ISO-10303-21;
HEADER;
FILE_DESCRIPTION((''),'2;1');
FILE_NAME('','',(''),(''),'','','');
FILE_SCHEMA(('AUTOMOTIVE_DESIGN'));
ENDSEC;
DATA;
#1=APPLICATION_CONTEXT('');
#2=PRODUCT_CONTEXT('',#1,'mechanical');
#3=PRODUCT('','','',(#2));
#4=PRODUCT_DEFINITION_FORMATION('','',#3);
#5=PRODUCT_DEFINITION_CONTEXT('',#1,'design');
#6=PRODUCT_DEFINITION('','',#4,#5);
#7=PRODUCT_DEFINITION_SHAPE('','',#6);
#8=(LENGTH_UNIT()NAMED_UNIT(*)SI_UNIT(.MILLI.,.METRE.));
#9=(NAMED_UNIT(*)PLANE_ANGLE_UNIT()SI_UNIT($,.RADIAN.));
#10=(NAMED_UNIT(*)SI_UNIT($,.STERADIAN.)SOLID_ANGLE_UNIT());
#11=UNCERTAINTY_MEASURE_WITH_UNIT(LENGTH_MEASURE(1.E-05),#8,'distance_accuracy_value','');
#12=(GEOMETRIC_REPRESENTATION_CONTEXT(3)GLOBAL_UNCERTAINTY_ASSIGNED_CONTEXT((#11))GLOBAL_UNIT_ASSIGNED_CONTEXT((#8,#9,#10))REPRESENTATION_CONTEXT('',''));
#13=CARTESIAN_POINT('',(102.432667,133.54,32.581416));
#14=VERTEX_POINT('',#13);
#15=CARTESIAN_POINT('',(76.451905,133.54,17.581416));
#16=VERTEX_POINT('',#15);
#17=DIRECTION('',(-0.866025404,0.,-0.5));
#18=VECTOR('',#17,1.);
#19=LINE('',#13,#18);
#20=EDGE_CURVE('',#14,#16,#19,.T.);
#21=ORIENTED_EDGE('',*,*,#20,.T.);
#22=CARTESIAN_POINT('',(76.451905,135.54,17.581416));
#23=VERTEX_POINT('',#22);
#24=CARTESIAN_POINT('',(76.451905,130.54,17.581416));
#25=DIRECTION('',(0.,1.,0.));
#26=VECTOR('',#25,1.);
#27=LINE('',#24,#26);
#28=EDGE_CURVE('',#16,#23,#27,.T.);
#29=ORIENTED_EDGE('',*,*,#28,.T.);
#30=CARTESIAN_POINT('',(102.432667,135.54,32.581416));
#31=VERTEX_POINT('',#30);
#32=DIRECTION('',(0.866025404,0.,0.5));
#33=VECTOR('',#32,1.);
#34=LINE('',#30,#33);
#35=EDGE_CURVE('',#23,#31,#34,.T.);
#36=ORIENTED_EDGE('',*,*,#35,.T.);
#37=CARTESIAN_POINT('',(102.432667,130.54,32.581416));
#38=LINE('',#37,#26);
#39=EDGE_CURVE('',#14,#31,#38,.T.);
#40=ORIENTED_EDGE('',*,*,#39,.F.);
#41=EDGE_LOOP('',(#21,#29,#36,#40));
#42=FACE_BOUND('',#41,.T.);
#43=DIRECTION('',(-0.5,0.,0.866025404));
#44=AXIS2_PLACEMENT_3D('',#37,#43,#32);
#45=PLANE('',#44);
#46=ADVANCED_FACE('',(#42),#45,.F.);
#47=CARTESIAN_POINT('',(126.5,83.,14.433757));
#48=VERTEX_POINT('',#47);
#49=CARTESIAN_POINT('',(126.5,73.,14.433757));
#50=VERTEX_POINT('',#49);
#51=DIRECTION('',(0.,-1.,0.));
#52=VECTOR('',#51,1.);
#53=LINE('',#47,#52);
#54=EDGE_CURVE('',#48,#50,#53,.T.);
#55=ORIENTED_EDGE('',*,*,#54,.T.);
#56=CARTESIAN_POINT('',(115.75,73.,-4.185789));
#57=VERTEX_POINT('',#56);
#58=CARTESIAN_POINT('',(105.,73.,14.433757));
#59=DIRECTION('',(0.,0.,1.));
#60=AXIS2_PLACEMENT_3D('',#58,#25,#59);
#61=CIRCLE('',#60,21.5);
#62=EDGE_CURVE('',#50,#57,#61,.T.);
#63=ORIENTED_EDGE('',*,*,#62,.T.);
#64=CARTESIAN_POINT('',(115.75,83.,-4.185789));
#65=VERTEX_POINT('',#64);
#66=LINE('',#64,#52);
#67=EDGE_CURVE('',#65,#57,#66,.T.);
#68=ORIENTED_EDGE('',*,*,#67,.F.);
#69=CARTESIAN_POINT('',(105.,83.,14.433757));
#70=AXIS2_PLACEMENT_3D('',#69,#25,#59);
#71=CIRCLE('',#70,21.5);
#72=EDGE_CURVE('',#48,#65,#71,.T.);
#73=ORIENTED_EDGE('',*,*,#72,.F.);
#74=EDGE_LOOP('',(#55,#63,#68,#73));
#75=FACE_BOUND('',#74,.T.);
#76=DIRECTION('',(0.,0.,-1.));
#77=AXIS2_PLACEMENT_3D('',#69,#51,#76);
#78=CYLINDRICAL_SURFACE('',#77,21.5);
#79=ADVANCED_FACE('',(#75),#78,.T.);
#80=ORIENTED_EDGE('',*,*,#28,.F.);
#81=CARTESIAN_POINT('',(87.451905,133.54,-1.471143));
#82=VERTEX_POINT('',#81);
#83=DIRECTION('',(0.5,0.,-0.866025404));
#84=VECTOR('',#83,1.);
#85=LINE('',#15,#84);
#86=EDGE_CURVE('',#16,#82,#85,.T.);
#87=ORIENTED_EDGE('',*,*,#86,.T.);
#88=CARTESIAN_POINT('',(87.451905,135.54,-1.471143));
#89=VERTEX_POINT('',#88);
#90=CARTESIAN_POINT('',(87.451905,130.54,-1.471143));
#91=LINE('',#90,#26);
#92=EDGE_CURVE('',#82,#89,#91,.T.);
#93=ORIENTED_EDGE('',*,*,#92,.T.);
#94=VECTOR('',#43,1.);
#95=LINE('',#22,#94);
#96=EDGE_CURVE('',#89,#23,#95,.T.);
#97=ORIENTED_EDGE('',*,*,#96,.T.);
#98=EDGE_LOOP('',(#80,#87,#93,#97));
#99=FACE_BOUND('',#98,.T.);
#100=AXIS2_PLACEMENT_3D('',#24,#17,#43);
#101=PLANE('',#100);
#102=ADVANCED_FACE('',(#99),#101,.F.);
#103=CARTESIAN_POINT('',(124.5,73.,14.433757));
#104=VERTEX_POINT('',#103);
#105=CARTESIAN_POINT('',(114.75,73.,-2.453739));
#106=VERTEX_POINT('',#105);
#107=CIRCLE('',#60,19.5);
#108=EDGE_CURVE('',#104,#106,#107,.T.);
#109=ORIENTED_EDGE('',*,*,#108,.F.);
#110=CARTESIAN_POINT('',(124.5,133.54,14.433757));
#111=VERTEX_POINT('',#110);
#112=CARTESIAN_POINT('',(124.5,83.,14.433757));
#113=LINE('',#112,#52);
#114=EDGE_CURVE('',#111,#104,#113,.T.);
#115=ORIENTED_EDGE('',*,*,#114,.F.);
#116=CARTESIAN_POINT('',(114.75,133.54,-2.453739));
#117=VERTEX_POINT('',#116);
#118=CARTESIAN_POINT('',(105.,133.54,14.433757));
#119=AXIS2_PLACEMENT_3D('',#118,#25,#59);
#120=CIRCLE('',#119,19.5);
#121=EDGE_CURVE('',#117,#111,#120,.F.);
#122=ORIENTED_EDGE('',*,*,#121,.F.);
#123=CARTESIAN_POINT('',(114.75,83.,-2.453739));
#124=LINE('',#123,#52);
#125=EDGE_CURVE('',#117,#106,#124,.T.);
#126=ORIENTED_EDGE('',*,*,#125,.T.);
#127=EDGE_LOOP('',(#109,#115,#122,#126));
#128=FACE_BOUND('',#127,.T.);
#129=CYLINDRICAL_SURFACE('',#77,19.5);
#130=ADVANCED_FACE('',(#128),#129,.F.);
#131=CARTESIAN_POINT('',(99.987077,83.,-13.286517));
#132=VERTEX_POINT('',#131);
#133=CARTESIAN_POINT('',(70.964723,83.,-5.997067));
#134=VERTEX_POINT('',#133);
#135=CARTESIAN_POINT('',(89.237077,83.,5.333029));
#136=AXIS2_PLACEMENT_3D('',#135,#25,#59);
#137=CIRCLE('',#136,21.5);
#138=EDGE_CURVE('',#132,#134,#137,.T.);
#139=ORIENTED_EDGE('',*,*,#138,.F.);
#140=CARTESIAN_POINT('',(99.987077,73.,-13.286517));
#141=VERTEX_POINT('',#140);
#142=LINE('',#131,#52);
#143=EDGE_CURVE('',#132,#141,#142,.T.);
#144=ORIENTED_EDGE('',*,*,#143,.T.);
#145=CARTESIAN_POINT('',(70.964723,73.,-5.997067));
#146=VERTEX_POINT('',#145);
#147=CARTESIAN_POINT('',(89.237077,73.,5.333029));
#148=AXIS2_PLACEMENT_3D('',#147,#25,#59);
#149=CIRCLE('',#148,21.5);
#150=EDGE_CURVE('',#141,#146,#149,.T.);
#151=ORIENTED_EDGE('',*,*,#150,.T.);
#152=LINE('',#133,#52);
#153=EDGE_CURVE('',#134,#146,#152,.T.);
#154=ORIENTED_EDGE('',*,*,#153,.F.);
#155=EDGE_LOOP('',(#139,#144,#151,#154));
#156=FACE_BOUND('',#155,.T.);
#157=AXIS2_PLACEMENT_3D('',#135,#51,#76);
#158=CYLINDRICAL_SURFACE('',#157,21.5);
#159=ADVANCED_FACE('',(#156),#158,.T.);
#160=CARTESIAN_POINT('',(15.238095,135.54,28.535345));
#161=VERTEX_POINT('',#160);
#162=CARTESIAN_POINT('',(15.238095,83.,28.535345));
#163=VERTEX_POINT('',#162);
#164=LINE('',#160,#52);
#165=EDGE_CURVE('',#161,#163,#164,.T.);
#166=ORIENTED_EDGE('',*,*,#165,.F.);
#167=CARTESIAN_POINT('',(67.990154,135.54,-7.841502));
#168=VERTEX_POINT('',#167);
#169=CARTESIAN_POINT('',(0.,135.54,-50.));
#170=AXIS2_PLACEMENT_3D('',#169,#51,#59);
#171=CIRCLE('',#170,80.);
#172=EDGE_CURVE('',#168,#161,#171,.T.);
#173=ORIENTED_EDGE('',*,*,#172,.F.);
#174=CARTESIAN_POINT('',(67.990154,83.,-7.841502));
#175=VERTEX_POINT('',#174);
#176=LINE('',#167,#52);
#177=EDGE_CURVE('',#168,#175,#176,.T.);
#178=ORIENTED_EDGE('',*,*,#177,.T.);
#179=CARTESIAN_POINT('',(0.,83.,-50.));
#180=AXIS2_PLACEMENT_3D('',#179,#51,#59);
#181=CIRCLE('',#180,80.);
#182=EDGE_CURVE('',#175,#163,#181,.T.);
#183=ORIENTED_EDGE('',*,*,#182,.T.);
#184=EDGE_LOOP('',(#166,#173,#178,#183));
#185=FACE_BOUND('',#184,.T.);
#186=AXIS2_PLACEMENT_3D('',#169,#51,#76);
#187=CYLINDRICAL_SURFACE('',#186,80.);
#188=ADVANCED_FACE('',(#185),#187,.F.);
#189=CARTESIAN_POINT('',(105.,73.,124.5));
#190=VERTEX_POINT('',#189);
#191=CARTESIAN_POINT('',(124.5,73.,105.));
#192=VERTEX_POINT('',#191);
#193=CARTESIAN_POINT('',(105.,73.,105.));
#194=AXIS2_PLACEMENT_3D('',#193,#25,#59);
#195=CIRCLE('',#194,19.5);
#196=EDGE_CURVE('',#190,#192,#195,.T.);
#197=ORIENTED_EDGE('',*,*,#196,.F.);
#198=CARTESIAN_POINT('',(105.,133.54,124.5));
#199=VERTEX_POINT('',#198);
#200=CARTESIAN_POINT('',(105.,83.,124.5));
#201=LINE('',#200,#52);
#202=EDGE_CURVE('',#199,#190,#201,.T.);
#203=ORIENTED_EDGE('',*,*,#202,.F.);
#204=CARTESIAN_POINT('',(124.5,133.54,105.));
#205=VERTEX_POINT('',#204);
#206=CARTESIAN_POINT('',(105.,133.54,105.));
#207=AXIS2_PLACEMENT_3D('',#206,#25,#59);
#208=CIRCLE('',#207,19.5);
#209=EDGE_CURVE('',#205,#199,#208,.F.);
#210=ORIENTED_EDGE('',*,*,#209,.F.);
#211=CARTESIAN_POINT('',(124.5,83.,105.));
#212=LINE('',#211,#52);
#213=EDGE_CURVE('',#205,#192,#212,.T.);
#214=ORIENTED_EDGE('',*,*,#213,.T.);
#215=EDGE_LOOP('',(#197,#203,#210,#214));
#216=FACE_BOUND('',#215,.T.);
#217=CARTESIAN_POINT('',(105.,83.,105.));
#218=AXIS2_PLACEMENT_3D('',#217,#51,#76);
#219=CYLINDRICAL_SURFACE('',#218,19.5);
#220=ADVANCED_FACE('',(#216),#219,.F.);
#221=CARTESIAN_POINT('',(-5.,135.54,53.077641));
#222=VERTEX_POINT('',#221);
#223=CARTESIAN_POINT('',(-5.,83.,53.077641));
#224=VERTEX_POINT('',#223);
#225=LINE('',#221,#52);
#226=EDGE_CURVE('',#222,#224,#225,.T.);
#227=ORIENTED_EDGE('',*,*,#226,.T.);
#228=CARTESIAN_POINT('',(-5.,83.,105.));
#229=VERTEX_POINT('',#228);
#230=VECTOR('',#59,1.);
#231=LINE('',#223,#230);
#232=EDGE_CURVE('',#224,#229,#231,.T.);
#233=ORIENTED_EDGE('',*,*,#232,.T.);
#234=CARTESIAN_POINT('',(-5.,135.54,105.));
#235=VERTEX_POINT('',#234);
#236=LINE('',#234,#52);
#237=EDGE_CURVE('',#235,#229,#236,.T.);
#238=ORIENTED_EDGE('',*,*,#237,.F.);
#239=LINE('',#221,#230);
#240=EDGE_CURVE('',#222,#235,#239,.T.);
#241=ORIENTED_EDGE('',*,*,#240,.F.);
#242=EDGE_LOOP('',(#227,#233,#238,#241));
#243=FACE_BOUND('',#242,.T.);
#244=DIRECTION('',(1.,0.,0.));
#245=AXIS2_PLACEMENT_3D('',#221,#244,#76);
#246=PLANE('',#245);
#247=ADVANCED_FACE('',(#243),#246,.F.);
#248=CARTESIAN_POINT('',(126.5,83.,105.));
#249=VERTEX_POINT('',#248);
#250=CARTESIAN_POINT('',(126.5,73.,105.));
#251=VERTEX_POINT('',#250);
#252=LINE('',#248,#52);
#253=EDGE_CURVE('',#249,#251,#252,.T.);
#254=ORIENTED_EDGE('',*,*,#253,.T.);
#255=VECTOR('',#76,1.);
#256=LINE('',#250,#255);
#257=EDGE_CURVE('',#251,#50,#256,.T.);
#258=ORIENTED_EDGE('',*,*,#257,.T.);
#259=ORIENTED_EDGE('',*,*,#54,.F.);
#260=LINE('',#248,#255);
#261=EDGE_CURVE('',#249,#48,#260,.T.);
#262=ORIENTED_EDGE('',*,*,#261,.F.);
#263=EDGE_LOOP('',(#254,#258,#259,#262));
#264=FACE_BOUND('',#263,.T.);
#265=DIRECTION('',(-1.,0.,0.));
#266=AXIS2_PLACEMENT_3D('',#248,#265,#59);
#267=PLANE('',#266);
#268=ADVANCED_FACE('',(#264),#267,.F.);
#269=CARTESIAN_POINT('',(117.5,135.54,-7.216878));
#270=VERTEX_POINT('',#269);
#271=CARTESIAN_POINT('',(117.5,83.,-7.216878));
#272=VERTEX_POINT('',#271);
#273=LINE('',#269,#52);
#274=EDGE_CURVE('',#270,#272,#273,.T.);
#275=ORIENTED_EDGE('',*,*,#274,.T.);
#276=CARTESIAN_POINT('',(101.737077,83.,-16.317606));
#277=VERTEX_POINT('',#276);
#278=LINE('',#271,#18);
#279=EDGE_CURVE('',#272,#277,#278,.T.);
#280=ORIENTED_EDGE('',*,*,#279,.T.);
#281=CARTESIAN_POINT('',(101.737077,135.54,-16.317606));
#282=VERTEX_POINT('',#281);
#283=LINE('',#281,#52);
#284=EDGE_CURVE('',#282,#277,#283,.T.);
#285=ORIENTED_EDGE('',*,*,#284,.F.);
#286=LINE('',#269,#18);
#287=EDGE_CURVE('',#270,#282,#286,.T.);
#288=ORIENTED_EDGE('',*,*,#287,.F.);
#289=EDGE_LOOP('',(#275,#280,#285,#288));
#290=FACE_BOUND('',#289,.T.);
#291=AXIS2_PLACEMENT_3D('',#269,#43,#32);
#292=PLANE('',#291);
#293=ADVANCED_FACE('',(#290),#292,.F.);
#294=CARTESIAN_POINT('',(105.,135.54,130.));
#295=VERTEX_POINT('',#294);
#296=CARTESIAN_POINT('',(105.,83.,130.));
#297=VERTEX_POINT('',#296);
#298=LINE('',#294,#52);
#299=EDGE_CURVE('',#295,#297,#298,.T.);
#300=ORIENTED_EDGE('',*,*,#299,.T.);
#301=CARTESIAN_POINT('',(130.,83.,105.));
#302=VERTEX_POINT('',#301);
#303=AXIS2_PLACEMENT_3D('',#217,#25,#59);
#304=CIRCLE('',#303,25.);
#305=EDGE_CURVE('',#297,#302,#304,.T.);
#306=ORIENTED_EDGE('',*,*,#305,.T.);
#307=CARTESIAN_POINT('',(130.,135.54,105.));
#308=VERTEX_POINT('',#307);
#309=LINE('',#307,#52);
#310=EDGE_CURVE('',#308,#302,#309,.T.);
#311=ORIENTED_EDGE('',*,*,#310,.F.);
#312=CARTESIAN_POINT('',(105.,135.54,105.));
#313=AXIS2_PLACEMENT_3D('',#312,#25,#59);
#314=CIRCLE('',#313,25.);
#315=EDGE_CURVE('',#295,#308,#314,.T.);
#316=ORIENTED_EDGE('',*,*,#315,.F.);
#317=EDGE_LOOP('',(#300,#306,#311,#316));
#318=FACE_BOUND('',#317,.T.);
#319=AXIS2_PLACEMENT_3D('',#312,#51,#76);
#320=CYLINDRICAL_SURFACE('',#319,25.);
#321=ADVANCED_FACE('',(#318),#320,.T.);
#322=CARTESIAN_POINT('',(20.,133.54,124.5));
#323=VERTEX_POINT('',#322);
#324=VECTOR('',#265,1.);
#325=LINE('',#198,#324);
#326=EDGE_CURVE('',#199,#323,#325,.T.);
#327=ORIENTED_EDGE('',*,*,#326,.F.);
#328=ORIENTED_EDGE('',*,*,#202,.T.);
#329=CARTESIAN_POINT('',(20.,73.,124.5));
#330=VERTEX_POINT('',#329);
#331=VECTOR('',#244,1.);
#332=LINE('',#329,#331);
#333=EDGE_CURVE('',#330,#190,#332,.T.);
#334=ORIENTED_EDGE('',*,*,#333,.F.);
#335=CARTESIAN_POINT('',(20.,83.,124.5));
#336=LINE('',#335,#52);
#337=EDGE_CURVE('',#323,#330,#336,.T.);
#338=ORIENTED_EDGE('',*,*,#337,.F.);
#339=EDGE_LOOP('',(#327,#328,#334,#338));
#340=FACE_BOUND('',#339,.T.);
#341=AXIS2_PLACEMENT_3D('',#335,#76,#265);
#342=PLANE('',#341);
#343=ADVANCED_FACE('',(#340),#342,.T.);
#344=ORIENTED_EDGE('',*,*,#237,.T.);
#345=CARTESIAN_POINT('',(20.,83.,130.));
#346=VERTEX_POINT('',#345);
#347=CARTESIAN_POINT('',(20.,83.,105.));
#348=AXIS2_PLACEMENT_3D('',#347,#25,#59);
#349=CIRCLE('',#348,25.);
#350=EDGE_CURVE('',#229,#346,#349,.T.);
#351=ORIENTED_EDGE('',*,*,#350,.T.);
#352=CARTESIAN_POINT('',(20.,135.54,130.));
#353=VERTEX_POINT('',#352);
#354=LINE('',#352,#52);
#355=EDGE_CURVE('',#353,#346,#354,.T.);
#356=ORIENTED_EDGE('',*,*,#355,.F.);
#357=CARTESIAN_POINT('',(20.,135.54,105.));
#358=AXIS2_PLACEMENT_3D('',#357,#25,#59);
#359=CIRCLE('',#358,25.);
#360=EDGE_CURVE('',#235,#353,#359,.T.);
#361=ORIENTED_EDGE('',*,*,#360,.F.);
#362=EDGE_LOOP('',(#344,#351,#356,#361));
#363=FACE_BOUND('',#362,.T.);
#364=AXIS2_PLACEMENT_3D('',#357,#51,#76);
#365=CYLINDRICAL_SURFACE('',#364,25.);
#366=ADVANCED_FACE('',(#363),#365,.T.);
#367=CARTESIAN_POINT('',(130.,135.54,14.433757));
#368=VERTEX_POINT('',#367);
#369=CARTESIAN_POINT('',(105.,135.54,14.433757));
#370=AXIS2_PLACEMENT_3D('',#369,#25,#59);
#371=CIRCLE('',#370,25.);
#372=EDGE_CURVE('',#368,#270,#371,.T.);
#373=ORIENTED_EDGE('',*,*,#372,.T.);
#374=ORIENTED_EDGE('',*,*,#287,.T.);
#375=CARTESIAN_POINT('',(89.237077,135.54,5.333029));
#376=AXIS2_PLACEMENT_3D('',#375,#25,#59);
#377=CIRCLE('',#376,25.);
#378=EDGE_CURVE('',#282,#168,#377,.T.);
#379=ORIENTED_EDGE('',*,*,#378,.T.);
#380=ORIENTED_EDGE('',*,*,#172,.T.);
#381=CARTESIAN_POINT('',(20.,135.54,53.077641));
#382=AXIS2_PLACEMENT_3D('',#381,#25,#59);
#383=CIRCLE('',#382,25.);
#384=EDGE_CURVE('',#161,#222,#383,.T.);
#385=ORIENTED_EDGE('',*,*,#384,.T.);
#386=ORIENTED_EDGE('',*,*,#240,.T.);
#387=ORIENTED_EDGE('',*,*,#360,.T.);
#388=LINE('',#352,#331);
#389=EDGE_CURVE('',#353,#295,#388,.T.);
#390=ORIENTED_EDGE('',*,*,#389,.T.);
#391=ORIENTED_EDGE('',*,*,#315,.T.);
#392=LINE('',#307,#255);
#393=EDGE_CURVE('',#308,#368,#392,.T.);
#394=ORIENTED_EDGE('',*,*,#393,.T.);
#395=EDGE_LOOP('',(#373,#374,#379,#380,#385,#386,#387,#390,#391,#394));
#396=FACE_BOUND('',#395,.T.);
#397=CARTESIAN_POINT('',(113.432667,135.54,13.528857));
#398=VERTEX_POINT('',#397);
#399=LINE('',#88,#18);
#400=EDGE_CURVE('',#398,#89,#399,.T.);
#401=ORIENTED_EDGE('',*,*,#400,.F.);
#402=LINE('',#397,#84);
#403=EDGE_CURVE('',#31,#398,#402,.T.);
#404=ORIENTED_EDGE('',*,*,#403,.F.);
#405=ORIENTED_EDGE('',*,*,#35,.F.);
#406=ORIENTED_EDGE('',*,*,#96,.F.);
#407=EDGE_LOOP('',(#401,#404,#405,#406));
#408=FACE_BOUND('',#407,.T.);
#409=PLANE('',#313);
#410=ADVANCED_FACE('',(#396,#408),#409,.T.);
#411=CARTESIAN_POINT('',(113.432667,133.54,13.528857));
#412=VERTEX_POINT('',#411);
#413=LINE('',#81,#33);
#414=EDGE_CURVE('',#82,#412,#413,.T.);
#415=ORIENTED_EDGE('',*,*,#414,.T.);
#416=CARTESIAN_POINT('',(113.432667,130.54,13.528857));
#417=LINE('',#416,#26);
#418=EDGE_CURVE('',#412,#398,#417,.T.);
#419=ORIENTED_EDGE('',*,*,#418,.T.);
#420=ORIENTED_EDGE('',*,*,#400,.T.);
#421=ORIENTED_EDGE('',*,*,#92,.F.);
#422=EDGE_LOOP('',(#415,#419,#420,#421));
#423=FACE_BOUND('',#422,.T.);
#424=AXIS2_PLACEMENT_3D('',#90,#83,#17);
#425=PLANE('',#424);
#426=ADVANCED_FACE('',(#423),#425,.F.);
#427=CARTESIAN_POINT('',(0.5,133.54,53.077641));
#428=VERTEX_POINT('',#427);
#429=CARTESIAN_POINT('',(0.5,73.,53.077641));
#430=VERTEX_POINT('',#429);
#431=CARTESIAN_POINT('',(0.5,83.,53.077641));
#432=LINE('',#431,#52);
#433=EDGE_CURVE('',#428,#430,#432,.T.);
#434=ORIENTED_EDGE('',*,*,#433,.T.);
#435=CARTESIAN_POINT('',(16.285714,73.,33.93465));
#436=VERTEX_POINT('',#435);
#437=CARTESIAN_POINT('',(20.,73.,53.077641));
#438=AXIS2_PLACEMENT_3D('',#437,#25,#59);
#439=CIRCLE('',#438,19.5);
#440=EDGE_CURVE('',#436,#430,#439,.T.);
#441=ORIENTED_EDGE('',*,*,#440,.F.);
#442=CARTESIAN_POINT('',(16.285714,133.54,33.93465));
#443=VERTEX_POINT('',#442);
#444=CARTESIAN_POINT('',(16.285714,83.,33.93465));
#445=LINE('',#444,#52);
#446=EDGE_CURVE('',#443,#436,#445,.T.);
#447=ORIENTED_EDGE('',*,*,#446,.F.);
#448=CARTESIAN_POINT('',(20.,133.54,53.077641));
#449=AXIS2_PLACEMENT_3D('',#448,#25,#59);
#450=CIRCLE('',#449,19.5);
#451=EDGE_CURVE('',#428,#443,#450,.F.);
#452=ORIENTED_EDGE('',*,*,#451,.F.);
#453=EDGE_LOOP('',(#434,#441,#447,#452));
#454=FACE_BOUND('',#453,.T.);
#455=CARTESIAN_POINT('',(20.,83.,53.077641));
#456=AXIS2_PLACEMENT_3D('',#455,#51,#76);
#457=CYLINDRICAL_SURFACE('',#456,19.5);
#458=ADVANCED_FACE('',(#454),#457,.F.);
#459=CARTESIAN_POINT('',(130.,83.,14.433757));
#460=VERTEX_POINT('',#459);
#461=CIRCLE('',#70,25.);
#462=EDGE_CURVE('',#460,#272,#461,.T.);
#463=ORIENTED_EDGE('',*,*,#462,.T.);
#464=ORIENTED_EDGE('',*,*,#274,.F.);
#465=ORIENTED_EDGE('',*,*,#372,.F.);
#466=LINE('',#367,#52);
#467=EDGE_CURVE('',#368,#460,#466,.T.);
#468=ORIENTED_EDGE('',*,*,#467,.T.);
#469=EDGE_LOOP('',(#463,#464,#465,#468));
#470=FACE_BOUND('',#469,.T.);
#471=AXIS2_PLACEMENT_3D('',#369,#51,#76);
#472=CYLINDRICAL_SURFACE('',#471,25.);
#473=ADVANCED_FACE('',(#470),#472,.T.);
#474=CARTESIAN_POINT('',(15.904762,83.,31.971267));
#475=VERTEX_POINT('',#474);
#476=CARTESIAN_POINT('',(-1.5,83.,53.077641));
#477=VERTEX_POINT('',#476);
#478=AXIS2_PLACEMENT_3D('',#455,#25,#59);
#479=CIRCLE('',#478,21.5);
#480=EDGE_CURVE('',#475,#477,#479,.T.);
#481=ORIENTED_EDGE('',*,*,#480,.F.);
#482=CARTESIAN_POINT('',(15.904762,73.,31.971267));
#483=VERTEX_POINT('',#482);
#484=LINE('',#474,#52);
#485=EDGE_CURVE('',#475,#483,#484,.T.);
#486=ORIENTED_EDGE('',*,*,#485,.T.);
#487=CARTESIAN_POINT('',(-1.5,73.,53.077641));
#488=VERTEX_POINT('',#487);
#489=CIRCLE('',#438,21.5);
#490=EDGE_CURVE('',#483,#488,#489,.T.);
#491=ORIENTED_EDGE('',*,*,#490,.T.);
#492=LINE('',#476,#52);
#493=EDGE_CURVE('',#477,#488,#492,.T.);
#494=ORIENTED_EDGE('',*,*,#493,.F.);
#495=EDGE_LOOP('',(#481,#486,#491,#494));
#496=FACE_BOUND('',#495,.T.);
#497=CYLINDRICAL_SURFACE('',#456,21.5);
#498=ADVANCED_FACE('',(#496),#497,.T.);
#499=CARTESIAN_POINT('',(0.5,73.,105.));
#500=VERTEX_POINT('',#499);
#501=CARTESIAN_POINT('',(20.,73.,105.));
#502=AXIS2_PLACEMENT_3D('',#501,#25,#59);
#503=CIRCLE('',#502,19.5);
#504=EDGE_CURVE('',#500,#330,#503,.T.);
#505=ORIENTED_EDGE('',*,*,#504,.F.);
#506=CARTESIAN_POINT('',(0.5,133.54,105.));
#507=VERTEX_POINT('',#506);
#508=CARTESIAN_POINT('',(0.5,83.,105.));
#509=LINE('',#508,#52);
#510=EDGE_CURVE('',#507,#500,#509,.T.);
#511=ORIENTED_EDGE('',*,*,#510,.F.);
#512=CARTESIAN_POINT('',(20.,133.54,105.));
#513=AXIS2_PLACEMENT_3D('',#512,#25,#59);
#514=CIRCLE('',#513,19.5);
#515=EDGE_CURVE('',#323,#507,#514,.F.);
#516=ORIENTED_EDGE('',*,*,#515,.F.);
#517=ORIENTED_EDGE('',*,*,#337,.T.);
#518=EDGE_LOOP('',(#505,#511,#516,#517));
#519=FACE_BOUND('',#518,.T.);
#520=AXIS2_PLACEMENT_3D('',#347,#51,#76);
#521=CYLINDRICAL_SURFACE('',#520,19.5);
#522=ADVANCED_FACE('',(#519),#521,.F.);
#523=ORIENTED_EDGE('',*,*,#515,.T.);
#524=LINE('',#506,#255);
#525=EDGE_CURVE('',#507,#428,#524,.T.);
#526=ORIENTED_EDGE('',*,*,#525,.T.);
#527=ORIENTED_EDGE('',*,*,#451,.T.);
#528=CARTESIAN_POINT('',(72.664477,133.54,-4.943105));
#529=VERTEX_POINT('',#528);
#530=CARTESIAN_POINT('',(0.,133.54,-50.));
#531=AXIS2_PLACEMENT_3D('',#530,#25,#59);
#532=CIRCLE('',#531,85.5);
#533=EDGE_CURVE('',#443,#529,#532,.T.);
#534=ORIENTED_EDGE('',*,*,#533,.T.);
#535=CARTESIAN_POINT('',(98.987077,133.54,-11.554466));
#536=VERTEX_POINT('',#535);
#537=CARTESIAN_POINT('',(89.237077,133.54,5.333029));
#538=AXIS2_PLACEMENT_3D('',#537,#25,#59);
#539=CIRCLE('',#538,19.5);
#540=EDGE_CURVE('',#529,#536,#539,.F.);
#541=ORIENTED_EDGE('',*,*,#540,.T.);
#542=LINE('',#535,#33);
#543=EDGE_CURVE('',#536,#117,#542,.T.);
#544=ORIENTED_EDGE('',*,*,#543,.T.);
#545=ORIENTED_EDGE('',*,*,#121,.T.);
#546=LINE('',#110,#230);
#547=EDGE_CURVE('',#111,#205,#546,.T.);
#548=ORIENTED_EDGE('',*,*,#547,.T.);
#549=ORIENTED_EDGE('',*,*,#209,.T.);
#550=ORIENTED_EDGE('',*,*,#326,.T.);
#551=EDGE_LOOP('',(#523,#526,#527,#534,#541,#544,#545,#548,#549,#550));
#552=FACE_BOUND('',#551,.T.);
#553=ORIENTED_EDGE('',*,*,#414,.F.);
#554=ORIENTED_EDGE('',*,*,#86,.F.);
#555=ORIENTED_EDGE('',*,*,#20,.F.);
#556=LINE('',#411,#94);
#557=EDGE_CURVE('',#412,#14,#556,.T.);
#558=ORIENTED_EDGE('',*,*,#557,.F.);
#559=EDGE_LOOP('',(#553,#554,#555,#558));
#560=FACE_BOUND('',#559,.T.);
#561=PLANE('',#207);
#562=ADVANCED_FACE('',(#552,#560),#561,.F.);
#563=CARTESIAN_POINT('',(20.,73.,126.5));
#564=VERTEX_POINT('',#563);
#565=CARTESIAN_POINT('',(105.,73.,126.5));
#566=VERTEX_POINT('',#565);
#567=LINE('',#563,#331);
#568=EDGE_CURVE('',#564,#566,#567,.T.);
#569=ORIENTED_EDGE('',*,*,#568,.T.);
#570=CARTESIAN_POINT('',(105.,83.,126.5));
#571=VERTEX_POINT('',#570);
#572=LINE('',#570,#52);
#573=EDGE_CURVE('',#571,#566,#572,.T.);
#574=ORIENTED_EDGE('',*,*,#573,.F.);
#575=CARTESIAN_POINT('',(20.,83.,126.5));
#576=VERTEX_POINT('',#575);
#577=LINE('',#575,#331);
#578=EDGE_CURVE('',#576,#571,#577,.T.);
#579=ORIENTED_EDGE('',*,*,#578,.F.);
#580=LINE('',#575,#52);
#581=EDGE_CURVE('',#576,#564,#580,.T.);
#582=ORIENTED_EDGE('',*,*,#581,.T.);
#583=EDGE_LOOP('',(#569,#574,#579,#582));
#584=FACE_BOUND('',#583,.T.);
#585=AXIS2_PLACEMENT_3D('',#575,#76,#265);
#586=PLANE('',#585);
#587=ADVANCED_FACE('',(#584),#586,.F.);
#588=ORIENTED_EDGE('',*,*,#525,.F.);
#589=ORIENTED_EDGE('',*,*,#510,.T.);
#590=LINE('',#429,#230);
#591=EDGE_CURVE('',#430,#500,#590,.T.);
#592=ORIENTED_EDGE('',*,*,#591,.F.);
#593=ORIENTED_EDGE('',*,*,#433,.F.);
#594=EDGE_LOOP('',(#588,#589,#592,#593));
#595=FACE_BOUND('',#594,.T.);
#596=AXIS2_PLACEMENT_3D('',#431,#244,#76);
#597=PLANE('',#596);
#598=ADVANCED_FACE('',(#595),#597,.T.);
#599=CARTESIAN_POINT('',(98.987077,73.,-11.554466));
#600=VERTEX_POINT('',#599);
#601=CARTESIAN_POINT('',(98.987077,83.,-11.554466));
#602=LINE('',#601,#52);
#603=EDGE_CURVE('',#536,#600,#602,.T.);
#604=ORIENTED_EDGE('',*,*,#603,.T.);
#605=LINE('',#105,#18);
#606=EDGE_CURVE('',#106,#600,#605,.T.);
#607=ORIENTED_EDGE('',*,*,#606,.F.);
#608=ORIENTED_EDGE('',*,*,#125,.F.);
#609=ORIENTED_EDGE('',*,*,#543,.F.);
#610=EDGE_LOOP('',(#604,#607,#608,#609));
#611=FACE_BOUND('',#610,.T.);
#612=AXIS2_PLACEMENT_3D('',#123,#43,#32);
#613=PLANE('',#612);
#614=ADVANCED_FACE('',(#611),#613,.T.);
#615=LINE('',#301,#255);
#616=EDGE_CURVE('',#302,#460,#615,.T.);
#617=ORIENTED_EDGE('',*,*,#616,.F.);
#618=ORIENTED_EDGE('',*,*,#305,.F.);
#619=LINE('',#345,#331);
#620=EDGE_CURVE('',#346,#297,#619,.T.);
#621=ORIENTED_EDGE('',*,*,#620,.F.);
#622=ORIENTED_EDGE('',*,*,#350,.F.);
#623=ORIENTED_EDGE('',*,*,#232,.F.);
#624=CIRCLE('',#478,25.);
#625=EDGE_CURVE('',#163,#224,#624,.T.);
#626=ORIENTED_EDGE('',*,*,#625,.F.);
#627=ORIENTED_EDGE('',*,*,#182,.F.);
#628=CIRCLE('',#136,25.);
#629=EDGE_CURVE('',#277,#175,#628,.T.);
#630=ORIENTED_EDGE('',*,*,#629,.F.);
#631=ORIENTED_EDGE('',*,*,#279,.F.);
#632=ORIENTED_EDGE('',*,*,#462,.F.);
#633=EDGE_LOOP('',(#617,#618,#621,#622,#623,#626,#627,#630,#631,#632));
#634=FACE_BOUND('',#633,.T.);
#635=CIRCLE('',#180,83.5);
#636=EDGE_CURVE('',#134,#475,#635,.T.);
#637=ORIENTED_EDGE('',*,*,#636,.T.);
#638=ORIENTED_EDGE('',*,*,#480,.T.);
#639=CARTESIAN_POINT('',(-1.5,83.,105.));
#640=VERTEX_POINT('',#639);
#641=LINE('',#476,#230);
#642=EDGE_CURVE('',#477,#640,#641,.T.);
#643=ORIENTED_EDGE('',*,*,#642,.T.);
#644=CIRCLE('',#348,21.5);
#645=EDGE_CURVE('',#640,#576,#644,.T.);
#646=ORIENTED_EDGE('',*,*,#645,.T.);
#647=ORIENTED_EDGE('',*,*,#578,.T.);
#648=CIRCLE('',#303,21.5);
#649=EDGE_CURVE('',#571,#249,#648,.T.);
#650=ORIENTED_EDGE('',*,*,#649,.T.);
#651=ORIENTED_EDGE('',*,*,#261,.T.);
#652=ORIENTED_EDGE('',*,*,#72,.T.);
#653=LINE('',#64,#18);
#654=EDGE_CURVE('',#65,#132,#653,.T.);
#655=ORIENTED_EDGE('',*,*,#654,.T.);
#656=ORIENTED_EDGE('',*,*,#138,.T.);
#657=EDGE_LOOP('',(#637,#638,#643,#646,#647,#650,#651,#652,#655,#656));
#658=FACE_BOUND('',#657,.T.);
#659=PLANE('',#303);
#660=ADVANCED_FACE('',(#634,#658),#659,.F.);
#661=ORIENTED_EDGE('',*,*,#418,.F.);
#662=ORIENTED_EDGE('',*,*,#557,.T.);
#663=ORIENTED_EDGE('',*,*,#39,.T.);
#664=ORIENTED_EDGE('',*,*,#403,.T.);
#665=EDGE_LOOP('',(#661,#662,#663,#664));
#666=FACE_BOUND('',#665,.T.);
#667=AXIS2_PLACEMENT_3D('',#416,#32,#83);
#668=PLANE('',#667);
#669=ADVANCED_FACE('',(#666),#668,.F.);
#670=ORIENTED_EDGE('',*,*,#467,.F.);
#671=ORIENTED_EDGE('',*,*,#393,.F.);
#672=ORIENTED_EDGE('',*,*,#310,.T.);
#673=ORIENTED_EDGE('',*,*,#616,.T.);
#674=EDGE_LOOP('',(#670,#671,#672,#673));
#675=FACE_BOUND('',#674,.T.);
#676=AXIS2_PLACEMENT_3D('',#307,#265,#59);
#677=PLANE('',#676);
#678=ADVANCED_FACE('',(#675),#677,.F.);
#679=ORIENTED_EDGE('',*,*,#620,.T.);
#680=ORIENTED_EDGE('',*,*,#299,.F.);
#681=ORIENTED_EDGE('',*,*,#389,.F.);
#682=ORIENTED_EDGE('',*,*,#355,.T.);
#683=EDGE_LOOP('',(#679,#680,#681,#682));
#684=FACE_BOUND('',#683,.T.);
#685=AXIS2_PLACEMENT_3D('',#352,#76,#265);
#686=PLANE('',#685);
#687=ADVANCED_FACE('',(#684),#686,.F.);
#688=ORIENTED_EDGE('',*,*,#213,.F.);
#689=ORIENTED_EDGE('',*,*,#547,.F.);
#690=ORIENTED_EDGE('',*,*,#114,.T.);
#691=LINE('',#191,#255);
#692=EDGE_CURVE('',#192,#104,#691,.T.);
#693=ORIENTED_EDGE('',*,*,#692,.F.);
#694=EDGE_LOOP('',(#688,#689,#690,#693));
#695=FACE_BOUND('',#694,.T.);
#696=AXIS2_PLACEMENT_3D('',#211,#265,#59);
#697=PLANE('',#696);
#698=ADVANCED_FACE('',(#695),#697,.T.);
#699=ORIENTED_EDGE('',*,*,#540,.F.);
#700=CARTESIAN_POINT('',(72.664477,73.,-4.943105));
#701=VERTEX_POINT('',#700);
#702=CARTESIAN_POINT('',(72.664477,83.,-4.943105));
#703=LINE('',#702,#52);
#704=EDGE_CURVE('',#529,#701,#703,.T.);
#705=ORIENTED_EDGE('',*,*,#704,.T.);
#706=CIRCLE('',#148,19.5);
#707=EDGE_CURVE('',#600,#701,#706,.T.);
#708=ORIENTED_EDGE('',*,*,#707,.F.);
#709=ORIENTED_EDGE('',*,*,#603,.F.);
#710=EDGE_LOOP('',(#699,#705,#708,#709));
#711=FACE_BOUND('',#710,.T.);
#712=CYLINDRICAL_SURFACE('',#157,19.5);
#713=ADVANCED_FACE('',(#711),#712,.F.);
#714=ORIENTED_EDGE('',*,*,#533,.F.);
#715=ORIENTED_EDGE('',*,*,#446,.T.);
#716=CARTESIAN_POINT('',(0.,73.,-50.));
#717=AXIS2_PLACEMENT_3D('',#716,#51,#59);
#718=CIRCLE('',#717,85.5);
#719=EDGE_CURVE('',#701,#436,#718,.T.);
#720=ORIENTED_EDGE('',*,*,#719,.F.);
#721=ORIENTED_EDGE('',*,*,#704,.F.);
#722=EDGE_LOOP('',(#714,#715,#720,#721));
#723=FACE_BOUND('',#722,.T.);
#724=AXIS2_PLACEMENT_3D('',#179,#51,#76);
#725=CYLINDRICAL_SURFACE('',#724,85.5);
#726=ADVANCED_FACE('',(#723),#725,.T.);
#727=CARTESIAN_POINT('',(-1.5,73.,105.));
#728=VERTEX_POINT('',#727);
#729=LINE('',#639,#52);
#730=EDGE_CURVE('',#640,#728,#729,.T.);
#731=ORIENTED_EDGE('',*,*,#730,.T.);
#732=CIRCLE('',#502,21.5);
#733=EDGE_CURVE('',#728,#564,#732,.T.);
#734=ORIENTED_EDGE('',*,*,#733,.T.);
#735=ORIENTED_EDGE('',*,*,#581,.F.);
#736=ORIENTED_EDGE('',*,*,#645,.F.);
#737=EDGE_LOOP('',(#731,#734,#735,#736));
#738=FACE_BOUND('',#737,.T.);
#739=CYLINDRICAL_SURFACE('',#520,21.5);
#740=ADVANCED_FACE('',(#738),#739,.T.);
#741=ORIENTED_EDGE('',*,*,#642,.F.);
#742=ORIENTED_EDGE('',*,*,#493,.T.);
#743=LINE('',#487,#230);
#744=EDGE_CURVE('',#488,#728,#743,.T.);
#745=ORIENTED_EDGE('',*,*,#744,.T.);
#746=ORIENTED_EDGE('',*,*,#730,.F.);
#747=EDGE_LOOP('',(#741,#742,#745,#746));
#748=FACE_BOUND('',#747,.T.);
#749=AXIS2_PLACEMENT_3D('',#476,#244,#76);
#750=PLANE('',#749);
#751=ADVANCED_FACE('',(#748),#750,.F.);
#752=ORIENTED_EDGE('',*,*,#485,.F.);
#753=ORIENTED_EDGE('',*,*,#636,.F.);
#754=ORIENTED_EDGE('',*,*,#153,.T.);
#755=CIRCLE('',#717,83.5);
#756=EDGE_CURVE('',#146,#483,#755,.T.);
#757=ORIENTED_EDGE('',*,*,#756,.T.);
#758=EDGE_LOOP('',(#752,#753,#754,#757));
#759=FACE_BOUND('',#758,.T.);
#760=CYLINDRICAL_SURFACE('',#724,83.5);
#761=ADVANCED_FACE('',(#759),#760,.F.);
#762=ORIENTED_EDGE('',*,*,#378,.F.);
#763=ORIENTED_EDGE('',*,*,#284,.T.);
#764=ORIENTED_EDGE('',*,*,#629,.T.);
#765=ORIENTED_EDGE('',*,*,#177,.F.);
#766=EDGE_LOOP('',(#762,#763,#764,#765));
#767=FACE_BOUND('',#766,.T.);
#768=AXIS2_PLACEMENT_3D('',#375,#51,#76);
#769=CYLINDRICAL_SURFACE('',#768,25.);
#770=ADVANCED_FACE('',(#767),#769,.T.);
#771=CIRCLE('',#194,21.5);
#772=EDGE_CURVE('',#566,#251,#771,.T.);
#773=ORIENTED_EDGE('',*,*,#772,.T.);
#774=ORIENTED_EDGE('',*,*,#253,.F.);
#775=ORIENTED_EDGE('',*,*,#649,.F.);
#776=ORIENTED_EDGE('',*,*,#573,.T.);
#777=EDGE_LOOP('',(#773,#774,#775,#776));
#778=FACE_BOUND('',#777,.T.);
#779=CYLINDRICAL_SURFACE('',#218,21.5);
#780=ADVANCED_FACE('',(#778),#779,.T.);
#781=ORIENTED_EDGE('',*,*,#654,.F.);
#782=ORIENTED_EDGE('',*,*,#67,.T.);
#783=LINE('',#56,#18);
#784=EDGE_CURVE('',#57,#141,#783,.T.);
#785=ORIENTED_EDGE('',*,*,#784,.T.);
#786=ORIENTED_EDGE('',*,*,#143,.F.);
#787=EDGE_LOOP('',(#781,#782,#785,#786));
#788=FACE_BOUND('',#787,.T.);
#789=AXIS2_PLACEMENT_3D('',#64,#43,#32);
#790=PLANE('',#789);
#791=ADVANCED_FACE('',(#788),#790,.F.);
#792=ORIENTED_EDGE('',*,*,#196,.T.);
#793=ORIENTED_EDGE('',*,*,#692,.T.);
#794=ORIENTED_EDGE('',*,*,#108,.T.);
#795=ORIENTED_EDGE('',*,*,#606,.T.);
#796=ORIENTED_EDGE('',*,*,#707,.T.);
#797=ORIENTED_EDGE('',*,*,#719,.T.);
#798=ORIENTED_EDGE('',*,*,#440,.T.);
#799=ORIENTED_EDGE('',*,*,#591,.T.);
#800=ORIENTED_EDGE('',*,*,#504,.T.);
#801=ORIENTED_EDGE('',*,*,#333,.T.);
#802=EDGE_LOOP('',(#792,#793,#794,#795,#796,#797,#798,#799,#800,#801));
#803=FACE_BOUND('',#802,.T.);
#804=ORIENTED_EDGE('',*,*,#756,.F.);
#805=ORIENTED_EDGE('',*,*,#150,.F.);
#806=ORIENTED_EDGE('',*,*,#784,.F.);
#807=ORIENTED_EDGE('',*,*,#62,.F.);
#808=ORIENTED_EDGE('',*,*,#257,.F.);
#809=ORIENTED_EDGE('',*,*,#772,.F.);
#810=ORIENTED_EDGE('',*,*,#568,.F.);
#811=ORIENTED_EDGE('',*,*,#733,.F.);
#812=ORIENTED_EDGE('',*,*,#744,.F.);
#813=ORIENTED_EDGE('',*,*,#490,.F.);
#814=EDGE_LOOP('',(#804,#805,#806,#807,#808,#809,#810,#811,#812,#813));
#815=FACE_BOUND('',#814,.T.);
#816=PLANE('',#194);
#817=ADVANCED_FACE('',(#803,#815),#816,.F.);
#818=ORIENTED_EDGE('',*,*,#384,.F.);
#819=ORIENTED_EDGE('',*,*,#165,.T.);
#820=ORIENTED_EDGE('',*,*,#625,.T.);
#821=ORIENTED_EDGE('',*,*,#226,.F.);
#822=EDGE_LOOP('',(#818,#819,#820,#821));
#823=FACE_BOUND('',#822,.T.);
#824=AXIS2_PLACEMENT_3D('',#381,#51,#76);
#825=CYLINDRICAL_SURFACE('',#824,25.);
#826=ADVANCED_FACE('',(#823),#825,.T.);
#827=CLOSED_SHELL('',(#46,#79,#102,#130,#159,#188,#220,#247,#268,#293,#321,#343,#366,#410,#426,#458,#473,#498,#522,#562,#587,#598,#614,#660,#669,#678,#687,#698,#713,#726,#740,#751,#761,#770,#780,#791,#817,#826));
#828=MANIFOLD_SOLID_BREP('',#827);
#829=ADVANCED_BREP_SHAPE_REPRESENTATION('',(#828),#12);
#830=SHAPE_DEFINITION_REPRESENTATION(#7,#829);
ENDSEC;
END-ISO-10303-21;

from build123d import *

# Parameters (mm, degrees)
SKETCH1_W               = 260
SKETCH1_H               = 100
BOSS_EXTRUDE1_DEPTH     = 3
CUT_EXTRUDE1_DEPTH      = 5
SKETCH5_W               = 260
SKETCH5_H               = 80
BOSS_EXTRUDE4_DEPTH     = 3
BOSS_EXTRUDE5_START     = 70
BOSS_EXTRUDE5_DEPTH     = 70
BOSS_EXTRUDE6_DEPTH     = 70
CUT_EXTRUDE3_DEPTH      = 198.810515393
SKETCH10_R              = 5
SKETCH10_R_2            = 1.75
BOSS_EXTRUDE7_DEPTH     = 50
CHAMFER1_SIZE           = 5
CHAMFER1_SIZE2          = 8.660254038
FILLET1_R               = 22
FILLET2_R               = 25
CUT_EXTRUDE4_START      = 20
CUT_EXTRUDE4_DEPTH      = 20
SKETCH12_R              = 1.75
CUT_EXTRUDE5_DEPTH      = 20
CUT_EXTRUDE6_DEPTH      = 40
FILLET3_R               = 5
BOSS_EXTRUDE8_DEPTH     = 10
CUT_EXTRUDE7_DEPTH      = 202.715145688
CUT_EXTRUDE7_DEPTH_BACK = 202.715145688
SKETCH16_W              = 135
SKETCH16_H              = 73
BOSS_EXTRUDE9_DEPTH     = 52.54
CUT_EXTRUDE8_DEPTH      = 5
CUT_EXTRUDE10_DEPTH     = 50.54


with BuildPart() as part:
    # Sketch1 → Boss-Extrude1 (new body)
    with BuildSketch(Plane(origin=(0, 0, 0), x_dir=(1, 0, 0), z_dir=(0, 1, 0))):
        Rectangle(SKETCH1_W, SKETCH1_H)
    extrude(amount=BOSS_EXTRUDE1_DEPTH)

    # Sketch4 → Cut-Extrude1 (cut)
    with BuildSketch(Plane(origin=(0, 3, 0), x_dir=(1, 0, 0), z_dir=(0, 1, 0))):
        with BuildLine():
            Line((-77.534249575, 30.291115131), (-130, 0))
            Line((-130, 0), (-130, 50))
            Line((-130, 50), (130, 50))
            Line((130, 50), (130, 0))
            Line((130, 0), (77.534249575, 30.291115131))
            ThreePointArc((77.534249575, 30.291115131), (0, -30), (-77.534249575, 30.291115131))
        make_face()
    extrude(amount=-CUT_EXTRUDE1_DEPTH, mode=Mode.SUBTRACT)

    # Sketch5 → Boss-Extrude4 (add)
    with BuildSketch(Plane(origin=(0, 3, 0), x_dir=(1, 0, 0), z_dir=(0, 1, 0))):
        with Locations((0, -90)):
            Rectangle(SKETCH5_W, SKETCH5_H)
    extrude(amount=-BOSS_EXTRUDE4_DEPTH)

    # Sketch6 → Boss-Extrude5 (add)
    with BuildSketch(Plane(origin=(0, 3, 0), x_dir=(1, 0, 0), z_dir=(0, 1, 0)).offset(BOSS_EXTRUDE5_START)):
        with BuildLine():
            Line((-77.534249575, 30.291115131), (-130, 0))
            Line((-130, 0), (-130, -130))
            Line((-130, -130), (130, -130))
            Line((130, -130), (130, 0))
            Line((130, 0), (77.534249575, 30.291115131))
            ThreePointArc((77.534249575, 30.291115131), (0, -30), (-77.534249575, 30.291115131))
        make_face()
        with BuildLine():
            Line((-79.381629809, 25.76042804), (-127, -1.732050808))
            Line((-127, -1.732050808), (-127, -127))
            Line((-127, -127), (127, -127))
            Line((127, -127), (127, -1.732050808))
            Line((127, -1.732050808), (79.381629809, 25.76042804))
            ThreePointArc((79.381629809, 25.76042804), (0, -33), (-79.381629809, 25.76042804))
        make_face(mode=Mode.SUBTRACT)
    extrude(amount=-BOSS_EXTRUDE5_DEPTH)

    # Sketch7 → Boss-Extrude6 (add)
    with BuildSketch(Plane(origin=(0, 73, 0), x_dir=(1, 0, 0), z_dir=(0, 1, 0))):
        with BuildLine():
            Line((-5, -32.849260709), (-5, -130))
            Line((-5, -130), (-2, -130))
            Line((-2, -130), (-2, -32.975900116))
            ThreePointArc((-2, -32.975900116), (-3.500572722, -32.92614781), (-5, -32.849260709))
        make_face()
    extrude(amount=-BOSS_EXTRUDE6_DEPTH)

    # Sketch9 → Cut-Extrude3 (cut, through all)
    with BuildSketch(Plane(origin=(0, 73, 0), x_dir=(1, 0, 0), z_dir=(0, 1, 0))):
        Polygon((-5, -32.849260709), (-5, -144.876678539), (-379.728059333, -144.876678539), (-379.728059333, 52.069032857), (-5, 52.069032857), align=None)
    extrude(amount=-CUT_EXTRUDE3_DEPTH, mode=Mode.SUBTRACT)

    # Sketch10 → Boss-Extrude7 (add)
    # profile 1 of 4: a face of its own
    with BuildSketch(Plane(origin=(0, 3, 0), x_dir=(1, 0, 0), z_dir=(0, 1, 0))):
        with Locations(Location((14, -46.75, 0), (0, 0, 90))):
            Circle(SKETCH10_R)
        with Locations(Location((14, -46.75, 0), (0, 0, 270))):
            Circle(SKETCH10_R_2, mode=Mode.SUBTRACT)
    # profile 2 of 4: a face of its own
    with BuildSketch(Plane(origin=(0, 3, 0), x_dir=(1, 0, 0), z_dir=(0, 1, 0))):
        with Locations(Location((86, -46.75, 0), (0, 0, 90))):
            Circle(SKETCH10_R)
        with Locations(Location((86, -46.75, 0), (0, 0, 270))):
            Circle(SKETCH10_R_2, mode=Mode.SUBTRACT)
    # profile 3 of 4: a face of its own
    with BuildSketch(Plane(origin=(0, 3, 0), x_dir=(1, 0, 0), z_dir=(0, 1, 0))):
        with Locations(Location((86, -113.25, 0), (0, 0, 90))):
            Circle(SKETCH10_R)
        with Locations(Location((86, -113.25, 0), (0, 0, 270))):
            Circle(SKETCH10_R_2, mode=Mode.SUBTRACT)
    # profile 4 of 4: a face of its own
    with BuildSketch(Plane(origin=(0, 3, 0), x_dir=(1, 0, 0), z_dir=(0, 1, 0))):
        with Locations(Location((14, -113.25, 0), (0, 0, 90))):
            Circle(SKETCH10_R)
        with Locations(Location((14, -113.25, 0), (0, 0, 270))):
            Circle(SKETCH10_R_2, mode=Mode.SUBTRACT)
    extrude(amount=BOSS_EXTRUDE7_DEPTH)

    # Chamfer1
    chamfer1_edges = [part.edges().sort_by_distance(p)[0] for p in [
        (86, 3, 51.75),
        (14, 3, 51.75),
        (86, 3, 118.25),
        (14, 3, 118.25),
    ]]
    chamfer1_side = [part.faces().sort_by_distance(p)[0] for p in [
        (68.049806081, 3, 64.998636776),
    ]]
    chamfer(chamfer1_edges, length=CHAMFER1_SIZE, length2=CHAMFER1_SIZE2, reference=chamfer1_side[0])

    # Fillet1
    fillet1_edges = [part.edges().sort_by_distance(p)[0] for p in [
        (-2, 38, 127),
        (-2, 38, 32.975900116),
        (127, 38, 127),
        (127, 38, 1.732050808),
        (79.381629809, 38, -25.76042804),
    ]]
    fillet(fillet1_edges, radius=FILLET1_R)

    # Fillet2
    fillet2_edges = [part.edges().sort_by_distance(p)[0] for p in [
        (-5, 36.5, 29.843597113),
        (-5, 36.5, 130),
        (77.534249575, 36.5, -30.291115131),
        (130, 36.5, 0),
        (130, 36.5, 130),
    ]]
    fillet(fillet2_edges, radius=FILLET2_R)

    # Sketch11 → Cut-Extrude4 (cut)
    with BuildSketch(Plane(origin=(0, 3, 0), x_dir=(1, 0, 0), z_dir=(0, 1, 0)).offset(CUT_EXTRUDE4_START)):
        with BuildLine():
            Line((52.464250206, -10.394556462), (54.431659589, -12.65935233))
            ThreePointArc((54.431659589, -12.65935233), (36.359512028, -24.612236832), (15.80952381, -31.480420697))
            Line((15.80952381, -31.480420697), (15.238095238, -28.53534525))
            ThreePointArc((15.238095238, -28.53534525), (35.045312798, -21.915408995), (52.464250206, -10.394556462))
        make_face()
        Polygon((101.737077009, 16.317606197), (100.237077009, 13.719529986), (116, 4.618802154), (117.5, 7.216878365), align=None)
    extrude(amount=-CUT_EXTRUDE4_DEPTH, mode=Mode.SUBTRACT)

    # Sketch12 → Cut-Extrude5 (cut)
    with BuildSketch(Plane(origin=(0, 3, 0), x_dir=(1, 0, 0), z_dir=(0, 1, 0))):
        with Locations(Location((89.237077009, -5.333028897, 0), (0, 0, 270))):
            Circle(SKETCH12_R)
        with Locations(Location((105, -105, 0), (0, 0, 270))):
            Circle(SKETCH12_R)
        with Locations(Location((15, -105, 0), (0, 0, 66.494954424))):
            Circle(SKETCH12_R)
        with Locations(Location((15, -55, 0), (0, 0, 260.317408662))):
            Circle(SKETCH12_R)
    extrude(amount=-CUT_EXTRUDE5_DEPTH, mode=Mode.SUBTRACT)

    # Sketch14 → Cut-Extrude6 (cut)
    with BuildSketch(Plane.XZ.offset(-23)):
        Polygon((101.737077009, -16.317606197), (117.5, -7.216878365), (116, -4.618802154), (100.237077009, -13.719529986), align=None)
    extrude(amount=-CUT_EXTRUDE6_DEPTH, mode=Mode.SUBTRACT)

    # Fillet3
    # the kernel refuses this fillet: 5 mm, written as the material it adds along each edge
    with BuildSketch(Plane(origin=(101.737077009, 3, -16.317606197), x_dir=(0.8660254037844373, 0, 0.5000000000000024), z_dir=(-0.5000000000000026, 0, 0.8660254037844373))) as fillet3_piece_1_section:
        with BuildLine():
            CenterArc((FILLET3_R, FILLET3_R), FILLET3_R, 180, 90)
            Line((0, FILLET3_R), (0, 0))
            Line((0, 0), (FILLET3_R, 0))
        make_face()
    fillet3_piece_1 = extrude(amount=15.5, mode=Mode.PRIVATE)
    fillet3_piece_1 = fillet3_piece_1 - Plane(origin=(89.237077009, 3.433810283, 5.333028897), x_dir=(-0.8498769238912803, 0, -0.5269812275945843), z_dir=(0, -1, 0)) * Cylinder(22, 52, mode=Mode.PRIVATE)
    add(fillet3_piece_1)
    with BuildSketch(Plane(origin=(109.75, 3, 6.206515394), x_dir=(-0.8660254037844346, 0, -0.500000000000007), z_dir=(0.500000000000007, 0, -0.8660254037844346))) as fillet3_piece_2_section:
        with BuildLine():
            CenterArc((FILLET3_R, FILLET3_R), FILLET3_R, 180, 90)
            Line((0, FILLET3_R), (0, 0))
            Line((0, 0), (FILLET3_R, 0))
        make_face()
    fillet3_piece_2 = extrude(amount=15.5, mode=Mode.PRIVATE)
    fillet3_piece_2 = fillet3_piece_2 - Plane(origin=(105, 4.115508028, 14.43375673), x_dir=(0.5000000000000037, 0, -0.8660254037844366), z_dir=(0, -1, 0)) * Cylinder(22, 51, mode=Mode.PRIVATE)
    add(fillet3_piece_2)
    with BuildSketch(Plane(origin=(44.266711112, 3, 0.957907015), x_dir=(-0.754931955778907, 0, 0.6558031275800951), z_dir=(0.6558031275800951, 0, 0.754931955778907))) as fillet3_piece_3_section:
        with BuildLine():
            CenterArc((FILLET3_R, -FILLET3_R), FILLET3_R, 90, 90)
            Line((0, -FILLET3_R), (0, 0))
            Line((0, 0), (FILLET3_R, 0))
        make_face()
    fillet3_piece_3 = extrude(amount=28, mode=Mode.PRIVATE)
    fillet3_piece_3 = fillet3_piece_3 & Plane(origin=(0, 4.116736713, -50), x_dir=(0.9564051784275456, 0, 0.2920430356590872), z_dir=(0, 1, 0)) * Cylinder(83, 77, mode=Mode.PRIVATE)
    fillet3_piece_3 = fillet3_piece_3 - Plane(origin=(0, 4.116736713, -50), x_dir=(0.9691781196921706, 0, 0.2463610608638238), z_dir=(0, 1, 0)) * Cylinder(80, 77, mode=Mode.PRIVATE)
    add(fillet3_piece_3)
    with BuildSketch(Plane(origin=(18.19047619, 3, 43.751568392), x_dir=(0.9816918156232519, 0, -0.19047619047619338), z_dir=(-0.19047619047619338, 0, -0.981691815623252))) as fillet3_piece_4_section:
        with BuildLine():
            CenterArc((FILLET3_R, -FILLET3_R), FILLET3_R, 90, 90)
            Line((0, -FILLET3_R), (0, 0))
            Line((0, 0), (FILLET3_R, 0))
        make_face()
    fillet3_piece_4 = extrude(amount=28, mode=Mode.PRIVATE)
    fillet3_piece_4 = fillet3_piece_4 - Plane(origin=(20, 4.115502573, 53.07764064), x_dir=(-0.19047619047619013, 0, -0.9816918156232526), z_dir=(0, -1, 0)) * Cylinder(22, 77, mode=Mode.PRIVATE)
    fillet3_piece_4 = fillet3_piece_4 - Plane(origin=(0, 4.115502573, -50), x_dir=(0.9691781196921706, 0, 0.2463610608638238), z_dir=(0, 1, 0)) * Cylinder(80, 77, mode=Mode.PRIVATE)
    add(fillet3_piece_4)
    with BuildSketch(Plane(origin=(44.266711112, 23, 0.957907015), x_dir=(-0.754931955778907, 0, 0.6558031275800951), z_dir=(0.6558031275800951, 0, 0.754931955778907))) as fillet3_piece_5_section:
        with BuildLine():
            CenterArc((FILLET3_R, FILLET3_R), FILLET3_R, 180, 90)
            Line((0, FILLET3_R), (0, 0))
            Line((0, 0), (FILLET3_R, 0))
        make_face()
    fillet3_piece_5 = extrude(amount=28, mode=Mode.PRIVATE)
    fillet3_piece_5 = fillet3_piece_5 & Plane(origin=(0, 21.883263287, -50), x_dir=(0.9564051784275456, 0, 0.2920430356590872), z_dir=(0, 1, 0)) * Cylinder(83, 77, mode=Mode.PRIVATE)
    fillet3_piece_5 = fillet3_piece_5 - Plane(origin=(0, 21.883263287, -50), x_dir=(0.9691781196921706, 0, 0.2463610608638238), z_dir=(0, 1, 0)) * Cylinder(80, 77, mode=Mode.PRIVATE)
    add(fillet3_piece_5)
    with BuildSketch(Plane(origin=(18.19047619, 23, 43.751568392), x_dir=(0, -1, 0), z_dir=(-0.19047619047619338, 0, -0.981691815623252))) as fillet3_piece_6_section:
        with BuildLine():
            CenterArc((FILLET3_R, -FILLET3_R), FILLET3_R, 90, 90)
            Line((0, -FILLET3_R), (0, 0))
            Line((0, 0), (FILLET3_R, 0))
        make_face()
    fillet3_piece_6 = extrude(amount=28, mode=Mode.PRIVATE)
    fillet3_piece_6 = fillet3_piece_6 & Plane(origin=(0, 21.870297326, -50), x_dir=(0.9564051784275456, 0, 0.2920430356590872), z_dir=(0, 1, 0)) * Cylinder(83, 77, mode=Mode.PRIVATE)
    fillet3_piece_6 = fillet3_piece_6 - Plane(origin=(0, 21.870297326, -50), x_dir=(0.9691781196921706, 0, 0.2463610608638238), z_dir=(0, 1, 0)) * Cylinder(80, 77, mode=Mode.PRIVATE)
    add(fillet3_piece_6)
    with BuildSketch(Plane(origin=(100.237077009, 63, -13.719529986), x_dir=(0.866025403784437, 0, 0.5000000000000028), z_dir=(0.5000000000000028, 0, -0.866025403784437))) as fillet3_piece_7:
        with BuildLine():
            CenterArc((FILLET3_R, FILLET3_R), FILLET3_R, 180, 90)
            Line((0, FILLET3_R), (0, 0))
            Line((0, 0), (FILLET3_R, 0))
        make_face()
    extrude(amount=3)
    with BuildSketch(Plane(origin=(117.5, 63, -7.216878365), x_dir=(0, -1, 0), z_dir=(-0.500000000000007, 0, 0.8660254037844346))) as fillet3_piece_8:
        with BuildLine():
            CenterArc((FILLET3_R, -FILLET3_R), FILLET3_R, 90, 90)
            Line((0, -FILLET3_R), (0, 0))
            Line((0, 0), (FILLET3_R, 0))
        make_face()
    extrude(amount=3)

    # Sketch16 → Cut-Extrude7 (cut, two sides: drawn at the far end of the back side and taken through both)
    with BuildSketch(Plane.XY.offset(-CUT_EXTRUDE7_DEPTH_BACK)):
        with Locations((62.5, 36.5)):
            Rectangle(SKETCH16_W, SKETCH16_H)
    extrude(amount=CUT_EXTRUDE7_DEPTH + CUT_EXTRUDE7_DEPTH_BACK, mode=Mode.SUBTRACT)


with BuildPart() as body_2:
    # Sketch15 → Boss-Extrude8 (new body)
    with BuildSketch(Plane(origin=(0, 73, 0), x_dir=(1, 0, 0), z_dir=(0, 1, 0))):
        with BuildLine():
            Line((126.5, -105), (126.5, -14.43375673))
            ThreePointArc((126.5, -14.43375673), (123.619546181, -3.68375673), (115.75, 4.185789452))
            Line((115.75, 4.185789452), (99.987077009, 13.286517284))
            ThreePointArc((99.987077009, 13.286517284), (83.999666249, 15.519297796), (70.964723145, 5.997067496))
            ThreePointArc((70.964723145, 5.997067496), (47.402272696, -18.740632403), (15.904761905, -31.971266605))
            ThreePointArc((15.904761905, -31.971266605), (3.412389879, -39.399146919), (-1.5, -53.07764064))
            Line((-1.5, -53.07764064), (-1.5, -105))
            ThreePointArc((-1.5, -105), (4.797204204, -120.202795796), (20, -126.5))
            Line((20, -126.5), (105, -126.5))
            ThreePointArc((105, -126.5), (120.202795796, -120.202795796), (126.5, -105))
        make_face()
        with BuildLine():
            Line((124.5, -105), (124.5, -14.43375673))
            ThreePointArc((124.5, -14.43375673), (121.887495374, -4.68375673), (114.75, 2.453738644))
            Line((114.75, 2.453738644), (98.987077009, 11.554466476))
            ThreePointArc((98.987077009, 11.554466476), (84.48686725, 13.579546476), (72.664476993, 4.943105041))
            ThreePointArc((72.664476993, 4.943105041), (48.537656474, -20.387114617), (16.285714286, -33.934650236))
            ThreePointArc((16.285714286, -33.934650236), (4.955423379, -40.67156494), (0.5, -53.07764064))
            Line((0.5, -53.07764064), (0.5, -105))
            ThreePointArc((0.5, -105), (6.211417767, -118.788582233), (20, -124.5))
            Line((20, -124.5), (105, -124.5))
            ThreePointArc((105, -124.5), (118.788582233, -118.788582233), (124.5, -105))
        make_face(mode=Mode.SUBTRACT)
    extrude(amount=BOSS_EXTRUDE8_DEPTH)

    # Sketch17 → Boss-Extrude9 (add)
    with BuildSketch(Plane(origin=(0, 83, 0), x_dir=(1, 0, 0), z_dir=(0, 1, 0))):
        with BuildLine():
            Line((130, -105), (130, -14.43375673))
            ThreePointArc((130, -14.43375673), (126.650635095, -1.93375673), (117.5, 7.216878365))
            Line((117.5, 7.216878365), (101.737077009, 16.317606197))
            ThreePointArc((101.737077009, 16.317606197), (83.147064497, 18.913862607), (67.990153911, 7.841501792))
            ThreePointArc((67.990153911, 7.841501792), (45.415351086, -15.85928853), (15.238095238, -28.53534525))
            ThreePointArc((15.238095238, -28.53534525), (0.712081255, -37.172415383), (-5, -53.07764064))
            Line((-5, -53.07764064), (-5, -105))
            ThreePointArc((-5, -105), (2.32233047, -122.67766953), (20, -130))
            Line((20, -130), (105, -130))
            ThreePointArc((105, -130), (122.67766953, -122.67766953), (130, -105))
        make_face()
    extrude(amount=BOSS_EXTRUDE9_DEPTH)

    # Sketch18 → Cut-Extrude8 (cut)
    with BuildSketch(Plane(origin=(0, 135.54, 0), x_dir=(1, 0, 0), z_dir=(0, 1, 0))):
        Polygon((87.451905284, 1.47114317), (113.432667397, -13.52885683), (102.432667397, -32.581415713), (76.451905284, -17.581415713), align=None)
    extrude(amount=-CUT_EXTRUDE8_DEPTH, mode=Mode.SUBTRACT)

    # Sketch20 → Cut-Extrude10 (cut)
    with BuildSketch(Plane.XZ.offset(-83)):
        with BuildLine():
            Line((124.5, 14.43375673), (124.5, 105))
            ThreePointArc((124.5, 105), (118.788582233, 118.788582233), (105, 124.5))
            Line((105, 124.5), (20, 124.5))
            ThreePointArc((20, 124.5), (6.211417767, 118.788582233), (0.5, 105))
            Line((0.5, 105), (0.5, 53.07764064))
            ThreePointArc((0.5, 53.07764064), (4.955423379, 40.67156494), (16.285714286, 33.934650236))
            ThreePointArc((16.285714286, 33.934650236), (48.537656474, 20.387114617), (72.664476993, -4.943105041))
            ThreePointArc((72.664476993, -4.943105041), (84.48686725, -13.579546476), (98.987077009, -11.554466476))
            Line((98.987077009, -11.554466476), (114.75, -2.453738644))
            ThreePointArc((114.75, -2.453738644), (121.887495374, 4.68375673), (124.5, 14.43375673))
        make_face()
    extrude(amount=-CUT_EXTRUDE10_DEPTH, mode=Mode.SUBTRACT)


solid = body_2.part
